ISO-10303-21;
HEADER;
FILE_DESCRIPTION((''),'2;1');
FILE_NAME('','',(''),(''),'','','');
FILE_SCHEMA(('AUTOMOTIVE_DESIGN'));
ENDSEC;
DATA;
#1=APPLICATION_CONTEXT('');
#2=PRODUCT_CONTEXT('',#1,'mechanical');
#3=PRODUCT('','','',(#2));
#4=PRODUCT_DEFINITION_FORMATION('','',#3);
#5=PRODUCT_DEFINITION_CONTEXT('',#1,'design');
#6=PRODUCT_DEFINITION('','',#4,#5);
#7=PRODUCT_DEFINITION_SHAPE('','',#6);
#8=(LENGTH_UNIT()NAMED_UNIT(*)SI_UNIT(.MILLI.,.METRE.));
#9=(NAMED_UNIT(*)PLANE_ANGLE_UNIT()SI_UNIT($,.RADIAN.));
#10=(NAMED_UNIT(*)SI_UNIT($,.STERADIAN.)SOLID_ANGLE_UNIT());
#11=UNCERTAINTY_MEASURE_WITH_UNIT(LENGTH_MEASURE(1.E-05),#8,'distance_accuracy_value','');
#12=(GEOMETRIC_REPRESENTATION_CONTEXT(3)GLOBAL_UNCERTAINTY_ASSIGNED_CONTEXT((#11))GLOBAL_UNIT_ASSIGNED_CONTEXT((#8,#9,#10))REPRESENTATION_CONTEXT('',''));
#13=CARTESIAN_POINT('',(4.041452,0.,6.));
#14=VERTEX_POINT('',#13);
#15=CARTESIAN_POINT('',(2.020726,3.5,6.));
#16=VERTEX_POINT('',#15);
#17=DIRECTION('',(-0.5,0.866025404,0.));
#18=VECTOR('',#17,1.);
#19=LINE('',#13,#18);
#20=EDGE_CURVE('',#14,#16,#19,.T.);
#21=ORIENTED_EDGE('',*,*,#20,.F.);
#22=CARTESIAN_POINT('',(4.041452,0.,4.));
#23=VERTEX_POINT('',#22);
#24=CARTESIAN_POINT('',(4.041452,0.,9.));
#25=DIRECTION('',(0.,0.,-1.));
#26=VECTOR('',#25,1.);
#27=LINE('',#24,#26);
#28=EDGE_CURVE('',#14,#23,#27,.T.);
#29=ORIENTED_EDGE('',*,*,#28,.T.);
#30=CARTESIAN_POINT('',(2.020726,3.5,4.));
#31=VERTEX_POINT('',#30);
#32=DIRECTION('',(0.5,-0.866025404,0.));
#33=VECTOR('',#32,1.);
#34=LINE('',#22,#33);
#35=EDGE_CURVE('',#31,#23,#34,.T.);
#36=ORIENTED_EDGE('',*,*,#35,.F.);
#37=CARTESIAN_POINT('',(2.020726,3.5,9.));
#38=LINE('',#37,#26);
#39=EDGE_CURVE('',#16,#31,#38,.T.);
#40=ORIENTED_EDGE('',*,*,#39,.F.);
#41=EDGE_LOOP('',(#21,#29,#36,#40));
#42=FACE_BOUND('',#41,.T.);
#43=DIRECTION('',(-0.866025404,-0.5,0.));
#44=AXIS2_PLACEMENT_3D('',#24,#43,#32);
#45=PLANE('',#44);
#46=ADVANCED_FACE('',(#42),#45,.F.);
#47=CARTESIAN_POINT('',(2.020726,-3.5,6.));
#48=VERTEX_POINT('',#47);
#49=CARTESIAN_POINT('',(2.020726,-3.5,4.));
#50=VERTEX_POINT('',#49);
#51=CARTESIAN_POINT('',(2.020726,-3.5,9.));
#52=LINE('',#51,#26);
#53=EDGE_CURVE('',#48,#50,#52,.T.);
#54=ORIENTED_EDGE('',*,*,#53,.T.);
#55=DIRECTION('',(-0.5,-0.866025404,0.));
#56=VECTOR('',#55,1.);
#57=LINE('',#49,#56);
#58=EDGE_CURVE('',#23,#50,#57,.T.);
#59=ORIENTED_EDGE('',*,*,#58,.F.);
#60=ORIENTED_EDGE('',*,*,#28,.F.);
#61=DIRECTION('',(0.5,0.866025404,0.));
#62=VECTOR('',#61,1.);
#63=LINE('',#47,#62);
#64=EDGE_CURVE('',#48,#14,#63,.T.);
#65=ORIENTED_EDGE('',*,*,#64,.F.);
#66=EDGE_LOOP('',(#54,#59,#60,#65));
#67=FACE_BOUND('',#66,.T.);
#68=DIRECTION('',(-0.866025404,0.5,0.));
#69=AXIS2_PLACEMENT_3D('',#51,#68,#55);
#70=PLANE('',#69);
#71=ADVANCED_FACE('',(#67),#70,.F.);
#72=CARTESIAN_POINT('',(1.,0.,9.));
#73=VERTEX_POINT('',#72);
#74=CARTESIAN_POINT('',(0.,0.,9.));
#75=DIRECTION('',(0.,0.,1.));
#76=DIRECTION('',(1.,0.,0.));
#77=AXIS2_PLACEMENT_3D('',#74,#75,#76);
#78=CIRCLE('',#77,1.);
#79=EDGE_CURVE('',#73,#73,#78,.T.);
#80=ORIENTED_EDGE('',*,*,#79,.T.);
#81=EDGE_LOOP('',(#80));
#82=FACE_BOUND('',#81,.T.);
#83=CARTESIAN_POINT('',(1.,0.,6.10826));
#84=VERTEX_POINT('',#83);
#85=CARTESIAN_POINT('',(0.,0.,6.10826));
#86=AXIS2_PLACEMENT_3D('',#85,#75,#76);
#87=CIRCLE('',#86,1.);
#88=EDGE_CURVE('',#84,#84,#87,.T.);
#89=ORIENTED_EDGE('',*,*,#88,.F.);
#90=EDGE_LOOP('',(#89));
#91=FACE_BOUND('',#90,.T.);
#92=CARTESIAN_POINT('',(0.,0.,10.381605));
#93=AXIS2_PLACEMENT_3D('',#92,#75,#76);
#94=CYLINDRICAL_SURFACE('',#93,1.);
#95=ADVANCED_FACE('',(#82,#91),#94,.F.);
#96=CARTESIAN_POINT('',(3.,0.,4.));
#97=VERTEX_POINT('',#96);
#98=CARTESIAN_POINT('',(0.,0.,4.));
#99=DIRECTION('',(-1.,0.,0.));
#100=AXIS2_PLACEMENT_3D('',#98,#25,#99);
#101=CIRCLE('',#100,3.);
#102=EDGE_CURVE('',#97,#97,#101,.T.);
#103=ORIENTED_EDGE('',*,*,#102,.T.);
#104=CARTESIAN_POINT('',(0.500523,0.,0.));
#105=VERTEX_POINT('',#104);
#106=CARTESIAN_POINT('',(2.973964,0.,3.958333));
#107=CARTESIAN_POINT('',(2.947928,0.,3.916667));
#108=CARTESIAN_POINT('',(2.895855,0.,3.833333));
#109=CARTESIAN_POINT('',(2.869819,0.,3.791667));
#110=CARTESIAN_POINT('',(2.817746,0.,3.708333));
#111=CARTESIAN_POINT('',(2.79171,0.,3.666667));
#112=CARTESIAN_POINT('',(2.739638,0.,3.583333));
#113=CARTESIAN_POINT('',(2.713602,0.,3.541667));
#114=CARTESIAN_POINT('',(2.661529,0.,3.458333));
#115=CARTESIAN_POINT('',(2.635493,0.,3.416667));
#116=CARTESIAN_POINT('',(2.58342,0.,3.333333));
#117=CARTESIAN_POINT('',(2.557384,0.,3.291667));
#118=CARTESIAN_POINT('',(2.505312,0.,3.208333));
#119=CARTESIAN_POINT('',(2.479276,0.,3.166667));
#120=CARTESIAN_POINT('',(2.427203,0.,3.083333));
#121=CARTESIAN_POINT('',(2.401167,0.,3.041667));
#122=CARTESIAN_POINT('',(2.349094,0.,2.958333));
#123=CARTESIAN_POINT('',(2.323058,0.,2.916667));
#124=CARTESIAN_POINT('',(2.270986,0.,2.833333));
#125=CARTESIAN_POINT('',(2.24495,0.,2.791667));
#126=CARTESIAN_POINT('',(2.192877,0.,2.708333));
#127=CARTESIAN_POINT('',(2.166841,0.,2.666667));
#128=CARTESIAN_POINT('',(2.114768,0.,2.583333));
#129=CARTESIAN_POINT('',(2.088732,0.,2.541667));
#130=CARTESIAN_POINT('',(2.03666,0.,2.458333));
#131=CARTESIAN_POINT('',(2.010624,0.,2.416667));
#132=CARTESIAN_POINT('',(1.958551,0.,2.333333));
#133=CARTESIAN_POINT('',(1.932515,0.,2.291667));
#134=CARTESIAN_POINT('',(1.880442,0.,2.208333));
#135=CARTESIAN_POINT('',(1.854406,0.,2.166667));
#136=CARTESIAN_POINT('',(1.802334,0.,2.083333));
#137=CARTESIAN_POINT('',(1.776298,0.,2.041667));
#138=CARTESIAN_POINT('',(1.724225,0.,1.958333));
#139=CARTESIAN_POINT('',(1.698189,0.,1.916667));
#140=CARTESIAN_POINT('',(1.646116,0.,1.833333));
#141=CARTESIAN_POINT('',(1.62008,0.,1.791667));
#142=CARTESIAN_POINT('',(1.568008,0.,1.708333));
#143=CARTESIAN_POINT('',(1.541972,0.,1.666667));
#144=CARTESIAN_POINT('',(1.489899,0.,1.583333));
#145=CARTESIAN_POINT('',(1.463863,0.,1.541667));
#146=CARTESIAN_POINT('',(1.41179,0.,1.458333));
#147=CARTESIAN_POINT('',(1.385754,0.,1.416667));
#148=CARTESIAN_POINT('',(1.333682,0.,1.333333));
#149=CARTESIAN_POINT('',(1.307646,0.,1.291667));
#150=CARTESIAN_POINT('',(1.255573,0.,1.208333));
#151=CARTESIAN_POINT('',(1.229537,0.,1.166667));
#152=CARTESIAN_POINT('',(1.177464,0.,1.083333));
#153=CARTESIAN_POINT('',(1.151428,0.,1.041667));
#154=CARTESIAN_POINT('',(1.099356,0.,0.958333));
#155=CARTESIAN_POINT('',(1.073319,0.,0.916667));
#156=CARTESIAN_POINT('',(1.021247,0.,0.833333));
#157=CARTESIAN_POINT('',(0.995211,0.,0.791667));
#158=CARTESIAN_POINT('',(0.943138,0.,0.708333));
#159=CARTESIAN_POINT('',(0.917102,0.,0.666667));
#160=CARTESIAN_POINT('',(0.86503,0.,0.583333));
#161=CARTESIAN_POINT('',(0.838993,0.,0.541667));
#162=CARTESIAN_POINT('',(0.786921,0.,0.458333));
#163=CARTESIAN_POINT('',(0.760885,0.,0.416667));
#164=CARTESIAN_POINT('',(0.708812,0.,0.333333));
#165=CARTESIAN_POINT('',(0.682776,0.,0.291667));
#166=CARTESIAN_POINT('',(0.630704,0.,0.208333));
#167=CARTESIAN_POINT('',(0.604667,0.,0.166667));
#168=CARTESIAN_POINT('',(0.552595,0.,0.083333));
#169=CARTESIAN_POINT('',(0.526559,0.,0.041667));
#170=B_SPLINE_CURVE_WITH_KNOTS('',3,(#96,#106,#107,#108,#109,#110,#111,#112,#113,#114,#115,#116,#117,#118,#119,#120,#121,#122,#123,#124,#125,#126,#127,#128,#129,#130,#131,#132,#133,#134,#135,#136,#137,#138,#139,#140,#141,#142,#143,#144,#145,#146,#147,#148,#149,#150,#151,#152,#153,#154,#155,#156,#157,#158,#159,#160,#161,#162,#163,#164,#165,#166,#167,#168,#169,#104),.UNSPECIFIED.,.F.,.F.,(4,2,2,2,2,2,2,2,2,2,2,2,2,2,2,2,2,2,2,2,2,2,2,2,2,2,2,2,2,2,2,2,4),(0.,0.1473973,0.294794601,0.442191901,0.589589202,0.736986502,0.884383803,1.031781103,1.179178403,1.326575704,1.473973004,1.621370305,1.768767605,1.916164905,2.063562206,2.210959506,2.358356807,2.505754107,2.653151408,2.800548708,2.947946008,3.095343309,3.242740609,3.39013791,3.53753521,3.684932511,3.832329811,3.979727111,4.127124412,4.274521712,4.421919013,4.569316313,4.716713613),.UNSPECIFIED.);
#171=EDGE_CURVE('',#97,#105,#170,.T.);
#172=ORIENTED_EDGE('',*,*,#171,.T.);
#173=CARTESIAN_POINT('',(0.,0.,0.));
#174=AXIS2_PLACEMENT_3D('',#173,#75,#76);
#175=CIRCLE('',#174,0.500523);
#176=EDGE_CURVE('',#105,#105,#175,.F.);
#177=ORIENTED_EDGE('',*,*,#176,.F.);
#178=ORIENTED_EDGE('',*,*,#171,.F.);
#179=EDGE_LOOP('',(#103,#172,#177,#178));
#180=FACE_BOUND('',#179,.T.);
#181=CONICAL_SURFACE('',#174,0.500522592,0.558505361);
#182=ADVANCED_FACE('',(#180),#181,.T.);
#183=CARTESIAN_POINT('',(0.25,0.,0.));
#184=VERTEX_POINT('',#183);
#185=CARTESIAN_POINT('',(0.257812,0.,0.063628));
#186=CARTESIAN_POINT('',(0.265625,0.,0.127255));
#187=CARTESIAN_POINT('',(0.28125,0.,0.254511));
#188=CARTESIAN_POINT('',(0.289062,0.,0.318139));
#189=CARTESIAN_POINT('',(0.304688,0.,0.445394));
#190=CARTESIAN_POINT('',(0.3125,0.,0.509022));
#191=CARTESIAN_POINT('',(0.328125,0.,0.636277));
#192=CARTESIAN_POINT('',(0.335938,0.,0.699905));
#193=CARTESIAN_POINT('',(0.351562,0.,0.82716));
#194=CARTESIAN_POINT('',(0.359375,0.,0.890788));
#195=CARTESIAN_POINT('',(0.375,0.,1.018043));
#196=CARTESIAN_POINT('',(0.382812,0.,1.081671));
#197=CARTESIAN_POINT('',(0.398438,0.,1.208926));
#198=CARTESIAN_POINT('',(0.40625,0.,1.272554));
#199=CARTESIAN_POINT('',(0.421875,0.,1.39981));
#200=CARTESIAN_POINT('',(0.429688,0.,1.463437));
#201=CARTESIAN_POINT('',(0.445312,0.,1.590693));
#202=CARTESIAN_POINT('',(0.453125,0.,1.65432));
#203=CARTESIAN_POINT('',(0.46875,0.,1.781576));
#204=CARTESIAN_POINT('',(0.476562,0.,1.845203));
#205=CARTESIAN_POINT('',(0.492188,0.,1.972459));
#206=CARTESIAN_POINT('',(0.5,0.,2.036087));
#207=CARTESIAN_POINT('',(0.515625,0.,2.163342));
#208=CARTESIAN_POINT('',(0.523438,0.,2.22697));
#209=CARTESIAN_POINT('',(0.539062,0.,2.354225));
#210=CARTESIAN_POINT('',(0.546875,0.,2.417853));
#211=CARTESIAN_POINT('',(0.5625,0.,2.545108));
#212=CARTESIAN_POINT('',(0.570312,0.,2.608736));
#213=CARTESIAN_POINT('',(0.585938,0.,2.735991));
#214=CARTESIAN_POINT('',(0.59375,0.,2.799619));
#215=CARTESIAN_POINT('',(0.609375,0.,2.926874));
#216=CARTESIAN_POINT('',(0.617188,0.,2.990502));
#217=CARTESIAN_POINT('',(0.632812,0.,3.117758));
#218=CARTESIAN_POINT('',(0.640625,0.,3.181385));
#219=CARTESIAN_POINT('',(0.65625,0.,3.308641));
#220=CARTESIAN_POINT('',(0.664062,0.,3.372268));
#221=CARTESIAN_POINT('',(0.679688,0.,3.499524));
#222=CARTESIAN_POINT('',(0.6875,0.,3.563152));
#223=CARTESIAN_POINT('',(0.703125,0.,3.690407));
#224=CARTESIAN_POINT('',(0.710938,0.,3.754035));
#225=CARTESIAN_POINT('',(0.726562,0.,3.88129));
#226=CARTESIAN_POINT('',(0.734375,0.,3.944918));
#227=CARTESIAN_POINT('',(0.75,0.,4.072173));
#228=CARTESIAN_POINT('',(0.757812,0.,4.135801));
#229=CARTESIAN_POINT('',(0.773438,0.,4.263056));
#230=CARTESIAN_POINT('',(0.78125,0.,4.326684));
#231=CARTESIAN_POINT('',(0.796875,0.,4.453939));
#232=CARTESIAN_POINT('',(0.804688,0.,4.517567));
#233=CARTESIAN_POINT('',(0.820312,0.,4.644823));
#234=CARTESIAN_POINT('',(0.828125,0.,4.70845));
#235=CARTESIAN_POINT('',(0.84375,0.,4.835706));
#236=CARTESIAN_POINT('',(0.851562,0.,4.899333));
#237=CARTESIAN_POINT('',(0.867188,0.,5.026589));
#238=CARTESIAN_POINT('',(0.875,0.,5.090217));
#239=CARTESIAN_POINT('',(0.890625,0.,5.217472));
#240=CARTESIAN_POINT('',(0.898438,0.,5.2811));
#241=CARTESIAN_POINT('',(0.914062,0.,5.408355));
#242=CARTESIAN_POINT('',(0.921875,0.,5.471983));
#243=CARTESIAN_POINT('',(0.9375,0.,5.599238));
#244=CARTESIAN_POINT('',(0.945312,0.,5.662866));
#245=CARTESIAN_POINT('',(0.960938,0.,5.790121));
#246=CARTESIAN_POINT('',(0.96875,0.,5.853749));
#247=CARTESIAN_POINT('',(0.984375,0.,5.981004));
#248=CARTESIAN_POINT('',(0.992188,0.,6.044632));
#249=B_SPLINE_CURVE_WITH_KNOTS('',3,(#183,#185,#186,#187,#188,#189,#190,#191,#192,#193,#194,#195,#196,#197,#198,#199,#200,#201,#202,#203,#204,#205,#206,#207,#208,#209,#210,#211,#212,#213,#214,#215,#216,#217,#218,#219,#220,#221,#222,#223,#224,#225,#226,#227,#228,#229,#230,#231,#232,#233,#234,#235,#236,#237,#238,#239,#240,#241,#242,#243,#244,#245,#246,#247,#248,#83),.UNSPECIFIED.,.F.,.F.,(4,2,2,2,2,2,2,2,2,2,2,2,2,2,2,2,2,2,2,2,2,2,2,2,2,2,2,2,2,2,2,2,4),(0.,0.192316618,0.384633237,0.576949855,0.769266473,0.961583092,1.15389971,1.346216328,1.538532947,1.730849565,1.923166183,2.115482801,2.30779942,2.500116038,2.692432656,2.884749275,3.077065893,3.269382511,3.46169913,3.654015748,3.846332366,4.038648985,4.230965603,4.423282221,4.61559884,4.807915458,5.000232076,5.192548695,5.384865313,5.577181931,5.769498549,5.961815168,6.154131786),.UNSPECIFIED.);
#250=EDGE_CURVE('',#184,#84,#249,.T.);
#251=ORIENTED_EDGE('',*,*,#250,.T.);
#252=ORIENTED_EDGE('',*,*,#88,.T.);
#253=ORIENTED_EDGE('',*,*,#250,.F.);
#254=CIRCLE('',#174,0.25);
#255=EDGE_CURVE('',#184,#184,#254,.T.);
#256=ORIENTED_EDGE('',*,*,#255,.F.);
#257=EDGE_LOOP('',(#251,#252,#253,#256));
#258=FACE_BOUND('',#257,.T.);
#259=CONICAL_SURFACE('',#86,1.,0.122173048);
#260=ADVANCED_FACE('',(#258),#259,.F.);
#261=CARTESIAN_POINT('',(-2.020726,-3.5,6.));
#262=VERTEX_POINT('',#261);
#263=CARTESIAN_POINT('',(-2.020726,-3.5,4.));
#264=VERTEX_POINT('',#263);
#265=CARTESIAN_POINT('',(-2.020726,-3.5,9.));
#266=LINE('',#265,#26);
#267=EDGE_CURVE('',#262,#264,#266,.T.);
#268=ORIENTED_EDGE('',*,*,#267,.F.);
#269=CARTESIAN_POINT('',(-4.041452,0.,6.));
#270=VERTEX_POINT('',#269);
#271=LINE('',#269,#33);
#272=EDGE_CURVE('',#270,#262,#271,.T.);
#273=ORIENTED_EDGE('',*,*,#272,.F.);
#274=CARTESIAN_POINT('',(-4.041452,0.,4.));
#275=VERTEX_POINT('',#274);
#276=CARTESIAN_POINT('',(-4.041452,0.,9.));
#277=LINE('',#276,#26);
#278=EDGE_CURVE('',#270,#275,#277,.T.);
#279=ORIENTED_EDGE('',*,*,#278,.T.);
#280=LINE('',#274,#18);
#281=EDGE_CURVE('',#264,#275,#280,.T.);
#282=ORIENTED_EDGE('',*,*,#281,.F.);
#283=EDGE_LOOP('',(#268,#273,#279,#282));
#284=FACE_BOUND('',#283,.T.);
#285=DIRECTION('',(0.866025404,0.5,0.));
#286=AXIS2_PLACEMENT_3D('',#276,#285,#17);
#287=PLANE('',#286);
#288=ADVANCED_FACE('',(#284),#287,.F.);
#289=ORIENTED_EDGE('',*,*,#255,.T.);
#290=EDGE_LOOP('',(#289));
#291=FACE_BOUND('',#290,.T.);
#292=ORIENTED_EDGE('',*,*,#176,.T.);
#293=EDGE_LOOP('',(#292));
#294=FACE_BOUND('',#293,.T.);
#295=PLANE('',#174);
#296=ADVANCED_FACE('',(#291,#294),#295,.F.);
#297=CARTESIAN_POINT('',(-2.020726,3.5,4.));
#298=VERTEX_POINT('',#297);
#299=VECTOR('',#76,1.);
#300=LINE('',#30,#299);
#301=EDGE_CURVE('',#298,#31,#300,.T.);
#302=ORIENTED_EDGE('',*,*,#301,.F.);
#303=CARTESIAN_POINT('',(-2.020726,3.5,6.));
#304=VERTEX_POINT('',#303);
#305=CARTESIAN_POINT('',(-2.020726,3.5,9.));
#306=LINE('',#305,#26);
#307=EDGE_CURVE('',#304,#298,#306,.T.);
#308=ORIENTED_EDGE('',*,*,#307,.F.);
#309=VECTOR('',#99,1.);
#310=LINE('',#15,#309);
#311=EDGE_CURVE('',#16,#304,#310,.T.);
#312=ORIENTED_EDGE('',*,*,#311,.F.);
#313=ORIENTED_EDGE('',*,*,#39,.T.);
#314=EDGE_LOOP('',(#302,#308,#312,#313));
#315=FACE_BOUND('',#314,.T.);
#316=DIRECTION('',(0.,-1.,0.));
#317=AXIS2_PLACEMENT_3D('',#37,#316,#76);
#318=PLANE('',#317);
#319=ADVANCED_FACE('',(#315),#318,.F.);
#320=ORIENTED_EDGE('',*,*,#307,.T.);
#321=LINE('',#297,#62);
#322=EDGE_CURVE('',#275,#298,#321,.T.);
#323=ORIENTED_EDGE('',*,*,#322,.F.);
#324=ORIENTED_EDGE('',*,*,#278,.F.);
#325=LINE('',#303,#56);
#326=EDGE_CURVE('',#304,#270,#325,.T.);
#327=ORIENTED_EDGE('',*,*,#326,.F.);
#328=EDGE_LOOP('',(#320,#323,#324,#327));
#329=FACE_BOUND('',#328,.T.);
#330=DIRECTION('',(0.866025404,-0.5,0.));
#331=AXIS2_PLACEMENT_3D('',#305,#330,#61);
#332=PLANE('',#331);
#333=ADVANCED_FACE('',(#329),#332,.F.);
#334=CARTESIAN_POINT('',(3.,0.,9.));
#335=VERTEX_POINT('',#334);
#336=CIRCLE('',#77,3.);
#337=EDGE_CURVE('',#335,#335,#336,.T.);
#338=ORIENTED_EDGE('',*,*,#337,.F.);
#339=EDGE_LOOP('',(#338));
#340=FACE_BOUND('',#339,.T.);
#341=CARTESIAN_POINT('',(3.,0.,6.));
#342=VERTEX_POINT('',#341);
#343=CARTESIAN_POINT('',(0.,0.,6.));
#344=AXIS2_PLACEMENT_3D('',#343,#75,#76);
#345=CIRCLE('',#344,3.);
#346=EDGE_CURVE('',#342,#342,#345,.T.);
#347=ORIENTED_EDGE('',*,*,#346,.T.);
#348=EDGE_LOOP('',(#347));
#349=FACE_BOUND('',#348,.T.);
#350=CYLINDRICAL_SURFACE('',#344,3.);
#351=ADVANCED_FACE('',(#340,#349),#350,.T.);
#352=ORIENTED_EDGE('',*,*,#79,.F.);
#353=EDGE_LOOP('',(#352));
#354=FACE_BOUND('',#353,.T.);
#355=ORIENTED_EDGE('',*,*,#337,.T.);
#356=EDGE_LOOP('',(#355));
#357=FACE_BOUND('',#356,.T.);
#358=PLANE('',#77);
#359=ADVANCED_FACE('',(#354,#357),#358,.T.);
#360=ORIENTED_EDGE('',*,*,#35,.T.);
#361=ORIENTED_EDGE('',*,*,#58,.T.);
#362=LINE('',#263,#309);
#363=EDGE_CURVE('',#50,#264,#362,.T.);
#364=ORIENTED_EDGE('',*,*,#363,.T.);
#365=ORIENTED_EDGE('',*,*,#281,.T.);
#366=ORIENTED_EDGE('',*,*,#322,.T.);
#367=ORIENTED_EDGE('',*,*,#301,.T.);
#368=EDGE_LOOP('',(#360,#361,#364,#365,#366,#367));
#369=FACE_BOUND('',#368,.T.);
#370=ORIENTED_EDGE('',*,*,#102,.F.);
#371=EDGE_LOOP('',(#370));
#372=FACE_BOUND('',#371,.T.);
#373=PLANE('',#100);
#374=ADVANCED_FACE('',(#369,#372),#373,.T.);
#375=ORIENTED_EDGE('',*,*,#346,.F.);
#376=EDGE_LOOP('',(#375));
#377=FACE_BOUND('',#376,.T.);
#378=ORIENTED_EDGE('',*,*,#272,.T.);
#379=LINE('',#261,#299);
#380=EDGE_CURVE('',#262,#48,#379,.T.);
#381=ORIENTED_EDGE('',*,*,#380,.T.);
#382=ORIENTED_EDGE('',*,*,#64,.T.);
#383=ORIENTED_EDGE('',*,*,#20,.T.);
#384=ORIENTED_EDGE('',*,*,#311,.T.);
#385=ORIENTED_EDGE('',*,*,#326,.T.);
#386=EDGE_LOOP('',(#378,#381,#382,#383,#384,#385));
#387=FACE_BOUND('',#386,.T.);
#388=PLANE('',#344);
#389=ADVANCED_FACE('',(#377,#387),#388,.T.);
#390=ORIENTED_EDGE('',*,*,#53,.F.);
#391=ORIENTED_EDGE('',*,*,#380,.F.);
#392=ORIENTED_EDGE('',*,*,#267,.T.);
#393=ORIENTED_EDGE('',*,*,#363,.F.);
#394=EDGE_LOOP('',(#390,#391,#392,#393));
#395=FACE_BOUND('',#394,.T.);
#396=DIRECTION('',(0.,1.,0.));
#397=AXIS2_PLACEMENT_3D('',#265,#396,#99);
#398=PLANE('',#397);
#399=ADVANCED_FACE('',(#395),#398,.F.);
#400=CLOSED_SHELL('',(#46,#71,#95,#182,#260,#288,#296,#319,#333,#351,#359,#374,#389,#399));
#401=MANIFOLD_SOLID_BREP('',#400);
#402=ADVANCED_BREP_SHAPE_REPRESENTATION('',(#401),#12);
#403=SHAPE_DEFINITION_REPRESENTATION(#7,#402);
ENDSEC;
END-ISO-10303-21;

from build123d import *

# Parameters (mm, degrees)
BOSS_EXTRU_1_DEPTH      = 9
ESQUISSE2_W             = 19.623971562
ESQUISSE2_H             = 15.534154535
ESQUISSE2_R             = 3
ENL_V_MAT_EXTRU_1_DEPTH = 3
ENL_V_START             = -4
ESQUISSE3_W             = 11.267201257
ESQUISSE3_H             = 13.961169169
ESQUISSE3_R             = 3
ENL_V_MAT_EXTRU_2_DEPTH = 4
CHANFREIN1_SIZE         = 4
CHANFREIN1_SIZE_2       = 2.499477408


with BuildPart() as part:
    # Esquisse1 → Boss.-Extru.1 (new body)
    with BuildSketch(Plane.XY):
        Polygon((4.041451884, 0), (2.020725942, 3.5), (-2.020725942, 3.5), (-4.041451884, 0), (-2.020725942, -3.5), (2.020725942, -3.5), align=None)
    extrude(amount=BOSS_EXTRU_1_DEPTH)

    # Esquisse2 → Enlèv. mat.-Extru.1 (cut)
    with BuildSketch(Plane.XY.offset(9)):
        with Locations((0.327116653, -1.544441398)):
            Rectangle(ESQUISSE2_W, ESQUISSE2_H)
        Circle(ESQUISSE2_R, mode=Mode.SUBTRACT)
    extrude(amount=-ENL_V_MAT_EXTRU_1_DEPTH, mode=Mode.SUBTRACT)

    # Esquisse3 → Enlèv. mat.-Extru.2 (cut)
    with BuildSketch(Plane(origin=(0, 0, 0), x_dir=(-1, 0, 0), z_dir=(0, 0, -1)).offset(ENL_V_START)):
        with Locations((0.009770186, 0.039262349)):
            Rectangle(ESQUISSE3_W, ESQUISSE3_H)
        with Locations(Location((0, 0, 0), (0, 0, 180))):
            Circle(ESQUISSE3_R, mode=Mode.SUBTRACT)
    extrude(amount=ENL_V_MAT_EXTRU_2_DEPTH, mode=Mode.SUBTRACT)

    # Chanfrein1
    # the kernel refuses this chamfer: 4, 2.499477408 mm, written as the material it takes off along each edge
    with BuildSketch(Plane(origin=(0, 0, 0), x_dir=(1, 0, 0), z_dir=(0, 1, 0))) as chanfrein1_piece_1_section:
        Polygon((3, -CHANFREIN1_SIZE), (3 - CHANFREIN1_SIZE_2, 0), (3, 0), align=None)
    chanfrein1_piece_1 = revolve(axis=Axis((0, 0, 0), (0, 0, -1)), mode=Mode.PRIVATE)
    chanfrein1_piece_1 = split(chanfrein1_piece_1, bisect_by=Plane(origin=(-1.744026904, 0, 4), z_dir=(0, 0, -1)), keep=Keep.TOP, mode=Mode.PRIVATE)
    add(chanfrein1_piece_1, mode=Mode.SUBTRACT)

    # Esquisse4 → Enlèvement de matière-Révolution1 (revolve, cut)
    with BuildSketch(Plane(origin=(0, 0, 0), x_dir=(1, 0, 0), z_dir=(0, 1, 0))):
        Polygon((0, -9), (1, -9), (1, -6.108259821), (0.25, 0), (0, 0), align=None)
    revolve(axis=Axis((0, 0, 10.381605157), (0, 0, -1)), mode=Mode.SUBTRACT)


solid = part.part
